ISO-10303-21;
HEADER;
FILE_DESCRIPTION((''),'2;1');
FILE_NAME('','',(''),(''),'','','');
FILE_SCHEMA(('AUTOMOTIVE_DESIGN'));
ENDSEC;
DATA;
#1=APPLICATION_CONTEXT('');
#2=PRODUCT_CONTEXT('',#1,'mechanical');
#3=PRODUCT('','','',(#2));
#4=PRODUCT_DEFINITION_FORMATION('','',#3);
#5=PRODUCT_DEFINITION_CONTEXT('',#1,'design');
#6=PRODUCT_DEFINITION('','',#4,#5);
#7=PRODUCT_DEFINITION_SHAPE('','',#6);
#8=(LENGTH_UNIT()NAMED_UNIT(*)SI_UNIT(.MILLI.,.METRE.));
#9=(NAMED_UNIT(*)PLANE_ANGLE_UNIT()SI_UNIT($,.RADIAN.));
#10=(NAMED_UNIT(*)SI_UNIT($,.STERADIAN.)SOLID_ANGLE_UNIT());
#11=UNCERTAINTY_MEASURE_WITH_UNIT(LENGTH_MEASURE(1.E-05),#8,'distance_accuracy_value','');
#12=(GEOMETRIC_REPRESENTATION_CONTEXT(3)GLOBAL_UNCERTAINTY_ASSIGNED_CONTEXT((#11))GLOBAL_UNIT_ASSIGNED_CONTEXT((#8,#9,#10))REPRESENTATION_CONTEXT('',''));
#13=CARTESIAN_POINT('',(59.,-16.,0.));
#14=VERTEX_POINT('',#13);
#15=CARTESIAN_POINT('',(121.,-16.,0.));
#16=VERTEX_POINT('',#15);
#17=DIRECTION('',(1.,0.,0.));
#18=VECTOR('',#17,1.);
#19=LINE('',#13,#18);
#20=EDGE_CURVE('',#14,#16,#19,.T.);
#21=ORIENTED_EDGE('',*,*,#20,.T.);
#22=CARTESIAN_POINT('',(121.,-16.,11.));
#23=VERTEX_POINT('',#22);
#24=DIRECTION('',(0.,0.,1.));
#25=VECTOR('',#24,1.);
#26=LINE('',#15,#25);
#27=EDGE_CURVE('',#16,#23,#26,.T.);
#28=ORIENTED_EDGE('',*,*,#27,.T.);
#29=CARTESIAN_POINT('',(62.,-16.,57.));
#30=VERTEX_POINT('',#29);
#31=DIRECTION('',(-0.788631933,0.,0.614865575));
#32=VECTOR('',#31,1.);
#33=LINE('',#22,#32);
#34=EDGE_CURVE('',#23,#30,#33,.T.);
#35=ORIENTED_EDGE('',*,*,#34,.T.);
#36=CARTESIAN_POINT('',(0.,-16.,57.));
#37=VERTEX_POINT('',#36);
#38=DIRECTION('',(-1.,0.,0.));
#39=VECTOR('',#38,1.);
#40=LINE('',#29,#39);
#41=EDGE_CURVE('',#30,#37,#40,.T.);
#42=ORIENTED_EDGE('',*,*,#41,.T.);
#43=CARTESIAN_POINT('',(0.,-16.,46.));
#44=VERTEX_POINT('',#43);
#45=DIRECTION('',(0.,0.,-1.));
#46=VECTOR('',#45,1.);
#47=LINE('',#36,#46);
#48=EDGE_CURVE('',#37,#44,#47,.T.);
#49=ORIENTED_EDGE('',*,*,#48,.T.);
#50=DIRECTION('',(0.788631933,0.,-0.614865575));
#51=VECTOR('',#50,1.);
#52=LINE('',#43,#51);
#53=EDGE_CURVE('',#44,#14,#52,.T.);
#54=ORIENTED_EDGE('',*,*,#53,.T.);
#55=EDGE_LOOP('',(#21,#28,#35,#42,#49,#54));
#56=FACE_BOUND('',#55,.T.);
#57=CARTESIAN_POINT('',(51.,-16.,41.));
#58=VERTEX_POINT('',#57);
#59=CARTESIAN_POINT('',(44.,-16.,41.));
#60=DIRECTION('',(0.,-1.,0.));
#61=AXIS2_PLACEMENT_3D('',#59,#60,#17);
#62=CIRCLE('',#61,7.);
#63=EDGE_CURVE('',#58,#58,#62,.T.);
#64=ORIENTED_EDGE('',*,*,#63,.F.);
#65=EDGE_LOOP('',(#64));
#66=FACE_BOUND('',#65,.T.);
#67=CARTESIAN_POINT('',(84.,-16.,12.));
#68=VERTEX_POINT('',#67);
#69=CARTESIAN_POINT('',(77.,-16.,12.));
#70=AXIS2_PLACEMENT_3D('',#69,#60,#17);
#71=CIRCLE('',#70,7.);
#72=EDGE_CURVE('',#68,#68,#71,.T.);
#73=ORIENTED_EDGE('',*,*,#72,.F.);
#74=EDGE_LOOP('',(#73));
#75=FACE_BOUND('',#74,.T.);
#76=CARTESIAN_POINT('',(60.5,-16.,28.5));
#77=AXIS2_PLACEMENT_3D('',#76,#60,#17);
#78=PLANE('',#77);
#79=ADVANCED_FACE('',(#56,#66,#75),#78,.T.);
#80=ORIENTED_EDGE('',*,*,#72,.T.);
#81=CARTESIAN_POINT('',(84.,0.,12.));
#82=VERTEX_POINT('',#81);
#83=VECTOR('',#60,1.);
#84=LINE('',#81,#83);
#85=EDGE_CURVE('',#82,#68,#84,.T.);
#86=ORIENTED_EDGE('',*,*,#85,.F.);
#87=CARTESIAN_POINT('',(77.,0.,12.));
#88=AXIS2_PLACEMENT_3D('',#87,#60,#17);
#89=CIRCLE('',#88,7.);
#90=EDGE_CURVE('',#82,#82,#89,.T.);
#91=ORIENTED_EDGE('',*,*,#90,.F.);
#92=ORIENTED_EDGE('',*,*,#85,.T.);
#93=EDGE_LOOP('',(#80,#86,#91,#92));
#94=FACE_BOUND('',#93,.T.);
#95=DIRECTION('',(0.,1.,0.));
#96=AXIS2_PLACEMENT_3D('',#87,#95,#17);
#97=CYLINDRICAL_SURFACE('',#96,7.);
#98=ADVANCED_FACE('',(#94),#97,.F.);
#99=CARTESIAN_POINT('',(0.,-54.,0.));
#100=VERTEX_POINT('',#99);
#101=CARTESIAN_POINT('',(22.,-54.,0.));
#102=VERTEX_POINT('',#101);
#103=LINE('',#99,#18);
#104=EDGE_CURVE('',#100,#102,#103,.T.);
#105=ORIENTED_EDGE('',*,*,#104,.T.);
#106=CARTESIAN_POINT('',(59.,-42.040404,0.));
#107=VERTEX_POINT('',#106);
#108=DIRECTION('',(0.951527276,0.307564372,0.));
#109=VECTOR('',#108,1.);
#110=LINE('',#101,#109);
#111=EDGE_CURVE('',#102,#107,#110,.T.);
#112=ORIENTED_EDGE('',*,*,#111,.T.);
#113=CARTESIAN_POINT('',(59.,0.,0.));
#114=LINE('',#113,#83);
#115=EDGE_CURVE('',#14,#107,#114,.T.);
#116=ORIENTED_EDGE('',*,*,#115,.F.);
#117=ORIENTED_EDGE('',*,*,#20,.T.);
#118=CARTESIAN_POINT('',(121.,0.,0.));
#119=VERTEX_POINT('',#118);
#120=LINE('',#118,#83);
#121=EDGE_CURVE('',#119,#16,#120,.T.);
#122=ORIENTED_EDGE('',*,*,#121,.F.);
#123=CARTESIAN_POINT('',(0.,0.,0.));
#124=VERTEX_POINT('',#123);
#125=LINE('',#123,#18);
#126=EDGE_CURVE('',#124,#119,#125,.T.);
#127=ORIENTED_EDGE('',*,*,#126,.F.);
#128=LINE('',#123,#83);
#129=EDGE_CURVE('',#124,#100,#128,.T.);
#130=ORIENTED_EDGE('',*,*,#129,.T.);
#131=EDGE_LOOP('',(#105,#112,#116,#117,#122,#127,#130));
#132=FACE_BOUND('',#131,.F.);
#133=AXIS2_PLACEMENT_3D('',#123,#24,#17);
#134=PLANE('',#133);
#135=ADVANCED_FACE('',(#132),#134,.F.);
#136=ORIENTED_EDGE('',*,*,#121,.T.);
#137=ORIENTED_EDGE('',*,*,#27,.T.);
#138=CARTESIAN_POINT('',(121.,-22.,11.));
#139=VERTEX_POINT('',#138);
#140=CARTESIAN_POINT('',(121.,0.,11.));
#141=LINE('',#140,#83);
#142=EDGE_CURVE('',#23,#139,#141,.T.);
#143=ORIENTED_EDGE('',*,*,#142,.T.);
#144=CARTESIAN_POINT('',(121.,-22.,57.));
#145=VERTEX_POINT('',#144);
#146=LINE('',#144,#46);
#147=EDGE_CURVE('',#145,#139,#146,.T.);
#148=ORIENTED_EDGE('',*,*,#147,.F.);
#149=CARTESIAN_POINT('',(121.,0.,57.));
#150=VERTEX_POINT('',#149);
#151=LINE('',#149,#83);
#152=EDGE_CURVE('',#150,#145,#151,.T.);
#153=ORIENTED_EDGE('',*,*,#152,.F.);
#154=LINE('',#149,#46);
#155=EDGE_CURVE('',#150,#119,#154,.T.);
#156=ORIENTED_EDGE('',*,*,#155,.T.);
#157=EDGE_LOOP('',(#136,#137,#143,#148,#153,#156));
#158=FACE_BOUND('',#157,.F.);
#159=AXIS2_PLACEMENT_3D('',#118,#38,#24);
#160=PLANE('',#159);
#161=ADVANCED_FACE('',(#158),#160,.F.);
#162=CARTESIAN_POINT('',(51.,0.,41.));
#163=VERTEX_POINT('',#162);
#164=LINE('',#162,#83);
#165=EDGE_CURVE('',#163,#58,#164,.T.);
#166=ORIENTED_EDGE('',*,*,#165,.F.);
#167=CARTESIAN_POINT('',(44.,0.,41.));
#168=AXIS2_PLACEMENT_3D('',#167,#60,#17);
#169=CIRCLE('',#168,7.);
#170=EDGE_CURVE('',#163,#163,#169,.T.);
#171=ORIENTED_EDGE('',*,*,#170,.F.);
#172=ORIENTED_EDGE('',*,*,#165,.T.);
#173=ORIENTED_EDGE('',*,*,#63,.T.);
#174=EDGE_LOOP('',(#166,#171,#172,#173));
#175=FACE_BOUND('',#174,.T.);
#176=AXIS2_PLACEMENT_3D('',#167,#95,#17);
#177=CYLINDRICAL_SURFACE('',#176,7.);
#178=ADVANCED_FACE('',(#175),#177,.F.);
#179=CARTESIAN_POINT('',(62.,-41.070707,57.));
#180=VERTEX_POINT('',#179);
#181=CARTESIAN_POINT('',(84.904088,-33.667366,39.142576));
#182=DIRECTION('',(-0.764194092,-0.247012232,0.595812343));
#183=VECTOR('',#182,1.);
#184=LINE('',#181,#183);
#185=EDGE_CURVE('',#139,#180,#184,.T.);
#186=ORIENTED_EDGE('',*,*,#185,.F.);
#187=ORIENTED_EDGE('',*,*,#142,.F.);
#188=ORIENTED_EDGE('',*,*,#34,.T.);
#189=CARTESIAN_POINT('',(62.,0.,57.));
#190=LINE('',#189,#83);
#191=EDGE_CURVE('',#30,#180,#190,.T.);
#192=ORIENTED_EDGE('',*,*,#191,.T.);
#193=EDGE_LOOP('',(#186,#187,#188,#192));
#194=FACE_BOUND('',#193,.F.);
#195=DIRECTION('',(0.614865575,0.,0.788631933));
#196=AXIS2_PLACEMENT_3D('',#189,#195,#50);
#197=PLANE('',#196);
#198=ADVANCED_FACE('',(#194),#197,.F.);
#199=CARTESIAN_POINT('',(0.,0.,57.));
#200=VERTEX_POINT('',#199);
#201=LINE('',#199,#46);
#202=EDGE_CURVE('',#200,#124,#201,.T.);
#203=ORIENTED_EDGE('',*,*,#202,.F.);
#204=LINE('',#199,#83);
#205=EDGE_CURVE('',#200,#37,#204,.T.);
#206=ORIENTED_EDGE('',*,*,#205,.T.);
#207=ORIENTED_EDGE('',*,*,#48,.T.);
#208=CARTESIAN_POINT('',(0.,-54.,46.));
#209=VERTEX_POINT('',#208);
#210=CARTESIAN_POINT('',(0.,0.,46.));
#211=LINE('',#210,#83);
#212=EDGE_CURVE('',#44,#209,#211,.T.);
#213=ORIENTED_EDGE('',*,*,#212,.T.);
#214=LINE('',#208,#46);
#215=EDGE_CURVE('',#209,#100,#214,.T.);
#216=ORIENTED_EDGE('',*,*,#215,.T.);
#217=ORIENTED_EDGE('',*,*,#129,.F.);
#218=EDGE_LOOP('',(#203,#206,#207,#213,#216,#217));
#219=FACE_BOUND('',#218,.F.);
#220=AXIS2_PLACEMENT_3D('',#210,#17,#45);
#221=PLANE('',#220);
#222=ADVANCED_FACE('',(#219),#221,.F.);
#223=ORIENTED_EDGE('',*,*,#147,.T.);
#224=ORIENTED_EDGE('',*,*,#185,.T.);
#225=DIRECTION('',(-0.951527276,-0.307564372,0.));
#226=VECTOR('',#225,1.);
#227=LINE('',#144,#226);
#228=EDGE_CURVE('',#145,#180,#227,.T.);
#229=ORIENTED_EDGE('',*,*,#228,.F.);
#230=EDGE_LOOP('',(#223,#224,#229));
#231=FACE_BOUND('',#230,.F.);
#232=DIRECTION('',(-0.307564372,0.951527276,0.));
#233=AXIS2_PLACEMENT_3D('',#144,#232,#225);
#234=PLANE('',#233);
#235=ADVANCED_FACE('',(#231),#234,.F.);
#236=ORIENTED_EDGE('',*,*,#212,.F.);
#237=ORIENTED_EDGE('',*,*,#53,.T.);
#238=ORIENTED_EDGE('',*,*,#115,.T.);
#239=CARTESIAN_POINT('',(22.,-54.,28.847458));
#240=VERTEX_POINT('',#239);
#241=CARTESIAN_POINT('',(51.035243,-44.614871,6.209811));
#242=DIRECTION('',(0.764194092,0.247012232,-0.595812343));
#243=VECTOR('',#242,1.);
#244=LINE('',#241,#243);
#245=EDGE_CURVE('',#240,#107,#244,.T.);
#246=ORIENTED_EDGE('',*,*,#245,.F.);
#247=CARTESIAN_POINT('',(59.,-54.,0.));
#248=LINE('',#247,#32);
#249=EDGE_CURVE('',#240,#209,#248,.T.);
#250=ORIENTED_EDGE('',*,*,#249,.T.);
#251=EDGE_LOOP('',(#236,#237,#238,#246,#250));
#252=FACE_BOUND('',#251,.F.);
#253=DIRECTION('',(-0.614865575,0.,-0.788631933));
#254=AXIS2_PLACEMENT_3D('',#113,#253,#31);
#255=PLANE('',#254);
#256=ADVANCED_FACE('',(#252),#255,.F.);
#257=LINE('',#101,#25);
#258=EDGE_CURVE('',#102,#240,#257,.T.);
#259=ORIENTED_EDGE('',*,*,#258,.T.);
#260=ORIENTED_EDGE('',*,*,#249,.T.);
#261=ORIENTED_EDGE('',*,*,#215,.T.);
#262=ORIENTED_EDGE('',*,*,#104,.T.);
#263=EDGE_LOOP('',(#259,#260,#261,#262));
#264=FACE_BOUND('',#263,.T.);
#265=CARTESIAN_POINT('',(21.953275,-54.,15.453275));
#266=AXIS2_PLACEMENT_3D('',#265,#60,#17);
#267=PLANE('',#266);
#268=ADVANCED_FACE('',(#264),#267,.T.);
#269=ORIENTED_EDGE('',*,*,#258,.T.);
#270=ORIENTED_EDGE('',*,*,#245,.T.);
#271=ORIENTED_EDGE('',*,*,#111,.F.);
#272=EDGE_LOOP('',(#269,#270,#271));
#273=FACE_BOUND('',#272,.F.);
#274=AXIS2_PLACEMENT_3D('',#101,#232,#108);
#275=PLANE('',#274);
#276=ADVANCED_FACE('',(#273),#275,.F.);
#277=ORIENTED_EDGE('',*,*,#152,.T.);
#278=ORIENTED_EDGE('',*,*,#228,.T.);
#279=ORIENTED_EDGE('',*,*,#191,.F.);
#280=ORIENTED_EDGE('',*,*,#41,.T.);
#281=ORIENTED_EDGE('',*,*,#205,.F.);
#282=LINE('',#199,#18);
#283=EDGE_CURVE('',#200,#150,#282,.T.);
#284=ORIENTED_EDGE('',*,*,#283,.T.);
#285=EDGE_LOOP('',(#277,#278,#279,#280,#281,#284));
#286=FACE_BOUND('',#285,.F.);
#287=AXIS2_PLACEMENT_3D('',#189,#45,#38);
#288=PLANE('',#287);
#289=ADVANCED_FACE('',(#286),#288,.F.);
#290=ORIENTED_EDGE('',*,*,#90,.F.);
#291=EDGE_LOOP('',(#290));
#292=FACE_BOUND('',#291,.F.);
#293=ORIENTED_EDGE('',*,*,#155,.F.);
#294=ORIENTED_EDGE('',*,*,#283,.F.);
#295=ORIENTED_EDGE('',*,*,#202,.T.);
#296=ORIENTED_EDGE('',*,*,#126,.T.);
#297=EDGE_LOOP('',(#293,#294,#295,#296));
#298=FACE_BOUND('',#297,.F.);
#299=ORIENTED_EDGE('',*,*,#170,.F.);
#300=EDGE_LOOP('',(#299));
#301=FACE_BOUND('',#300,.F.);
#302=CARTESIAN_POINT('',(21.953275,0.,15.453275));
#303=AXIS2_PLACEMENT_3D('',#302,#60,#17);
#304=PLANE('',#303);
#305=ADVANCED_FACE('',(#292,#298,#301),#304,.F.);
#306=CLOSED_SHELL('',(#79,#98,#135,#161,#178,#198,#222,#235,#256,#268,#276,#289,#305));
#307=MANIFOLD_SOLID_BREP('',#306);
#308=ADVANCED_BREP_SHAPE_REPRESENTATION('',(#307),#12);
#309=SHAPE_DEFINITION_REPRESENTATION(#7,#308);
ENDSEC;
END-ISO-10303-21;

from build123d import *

# Parameters (mm, degrees)
F0_R     = 7
F1_DEPTH = 16
F2_DEPTH = 54
F4_DEPTH = 57.001
F6_DEPTH = 57.001


with BuildPart() as f1:
    # F0 (on Front) → F1 (new body)
    with BuildSketch(Plane.XZ):
        Polygon((0, 46), (59, 0), (121, 0), (121, 11), (62, 57), (0, 57), align=None)
        with Locations((77, 12)):
            Circle(F0_R, mode=Mode.SUBTRACT)
        with Locations((44, 41)):
            Circle(F0_R, mode=Mode.SUBTRACT)
    extrude(amount=F1_DEPTH)

    # F0 (on Front) → F2 (join)
    with BuildSketch(Plane.XZ):
        Polygon((0, 46), (0, 0), (59, 0), align=None)
        Polygon((62, 57), (121, 11), (121, 57), align=None)
    extrude(amount=F2_DEPTH)

    # F3 (on face) → F4 (cut, through all)
    with BuildSketch(Plane.XY.offset(57)):
        Polygon((121, -54), (121, -22), (62, -41.0707070707), (62, -54), align=None)
    extrude(amount=-F4_DEPTH, mode=Mode.SUBTRACT)

    # F5 (on face) → F6 (cut, through all)
    with BuildSketch(Plane(origin=(0, 0, 0), x_dir=(1, 0, 0), z_dir=(0, 0, -1))):
        Polygon((59, 54), (22, 54), (59, 42.0404040404), align=None)
    extrude(amount=-F6_DEPTH, mode=Mode.SUBTRACT)


solid = f1.part
